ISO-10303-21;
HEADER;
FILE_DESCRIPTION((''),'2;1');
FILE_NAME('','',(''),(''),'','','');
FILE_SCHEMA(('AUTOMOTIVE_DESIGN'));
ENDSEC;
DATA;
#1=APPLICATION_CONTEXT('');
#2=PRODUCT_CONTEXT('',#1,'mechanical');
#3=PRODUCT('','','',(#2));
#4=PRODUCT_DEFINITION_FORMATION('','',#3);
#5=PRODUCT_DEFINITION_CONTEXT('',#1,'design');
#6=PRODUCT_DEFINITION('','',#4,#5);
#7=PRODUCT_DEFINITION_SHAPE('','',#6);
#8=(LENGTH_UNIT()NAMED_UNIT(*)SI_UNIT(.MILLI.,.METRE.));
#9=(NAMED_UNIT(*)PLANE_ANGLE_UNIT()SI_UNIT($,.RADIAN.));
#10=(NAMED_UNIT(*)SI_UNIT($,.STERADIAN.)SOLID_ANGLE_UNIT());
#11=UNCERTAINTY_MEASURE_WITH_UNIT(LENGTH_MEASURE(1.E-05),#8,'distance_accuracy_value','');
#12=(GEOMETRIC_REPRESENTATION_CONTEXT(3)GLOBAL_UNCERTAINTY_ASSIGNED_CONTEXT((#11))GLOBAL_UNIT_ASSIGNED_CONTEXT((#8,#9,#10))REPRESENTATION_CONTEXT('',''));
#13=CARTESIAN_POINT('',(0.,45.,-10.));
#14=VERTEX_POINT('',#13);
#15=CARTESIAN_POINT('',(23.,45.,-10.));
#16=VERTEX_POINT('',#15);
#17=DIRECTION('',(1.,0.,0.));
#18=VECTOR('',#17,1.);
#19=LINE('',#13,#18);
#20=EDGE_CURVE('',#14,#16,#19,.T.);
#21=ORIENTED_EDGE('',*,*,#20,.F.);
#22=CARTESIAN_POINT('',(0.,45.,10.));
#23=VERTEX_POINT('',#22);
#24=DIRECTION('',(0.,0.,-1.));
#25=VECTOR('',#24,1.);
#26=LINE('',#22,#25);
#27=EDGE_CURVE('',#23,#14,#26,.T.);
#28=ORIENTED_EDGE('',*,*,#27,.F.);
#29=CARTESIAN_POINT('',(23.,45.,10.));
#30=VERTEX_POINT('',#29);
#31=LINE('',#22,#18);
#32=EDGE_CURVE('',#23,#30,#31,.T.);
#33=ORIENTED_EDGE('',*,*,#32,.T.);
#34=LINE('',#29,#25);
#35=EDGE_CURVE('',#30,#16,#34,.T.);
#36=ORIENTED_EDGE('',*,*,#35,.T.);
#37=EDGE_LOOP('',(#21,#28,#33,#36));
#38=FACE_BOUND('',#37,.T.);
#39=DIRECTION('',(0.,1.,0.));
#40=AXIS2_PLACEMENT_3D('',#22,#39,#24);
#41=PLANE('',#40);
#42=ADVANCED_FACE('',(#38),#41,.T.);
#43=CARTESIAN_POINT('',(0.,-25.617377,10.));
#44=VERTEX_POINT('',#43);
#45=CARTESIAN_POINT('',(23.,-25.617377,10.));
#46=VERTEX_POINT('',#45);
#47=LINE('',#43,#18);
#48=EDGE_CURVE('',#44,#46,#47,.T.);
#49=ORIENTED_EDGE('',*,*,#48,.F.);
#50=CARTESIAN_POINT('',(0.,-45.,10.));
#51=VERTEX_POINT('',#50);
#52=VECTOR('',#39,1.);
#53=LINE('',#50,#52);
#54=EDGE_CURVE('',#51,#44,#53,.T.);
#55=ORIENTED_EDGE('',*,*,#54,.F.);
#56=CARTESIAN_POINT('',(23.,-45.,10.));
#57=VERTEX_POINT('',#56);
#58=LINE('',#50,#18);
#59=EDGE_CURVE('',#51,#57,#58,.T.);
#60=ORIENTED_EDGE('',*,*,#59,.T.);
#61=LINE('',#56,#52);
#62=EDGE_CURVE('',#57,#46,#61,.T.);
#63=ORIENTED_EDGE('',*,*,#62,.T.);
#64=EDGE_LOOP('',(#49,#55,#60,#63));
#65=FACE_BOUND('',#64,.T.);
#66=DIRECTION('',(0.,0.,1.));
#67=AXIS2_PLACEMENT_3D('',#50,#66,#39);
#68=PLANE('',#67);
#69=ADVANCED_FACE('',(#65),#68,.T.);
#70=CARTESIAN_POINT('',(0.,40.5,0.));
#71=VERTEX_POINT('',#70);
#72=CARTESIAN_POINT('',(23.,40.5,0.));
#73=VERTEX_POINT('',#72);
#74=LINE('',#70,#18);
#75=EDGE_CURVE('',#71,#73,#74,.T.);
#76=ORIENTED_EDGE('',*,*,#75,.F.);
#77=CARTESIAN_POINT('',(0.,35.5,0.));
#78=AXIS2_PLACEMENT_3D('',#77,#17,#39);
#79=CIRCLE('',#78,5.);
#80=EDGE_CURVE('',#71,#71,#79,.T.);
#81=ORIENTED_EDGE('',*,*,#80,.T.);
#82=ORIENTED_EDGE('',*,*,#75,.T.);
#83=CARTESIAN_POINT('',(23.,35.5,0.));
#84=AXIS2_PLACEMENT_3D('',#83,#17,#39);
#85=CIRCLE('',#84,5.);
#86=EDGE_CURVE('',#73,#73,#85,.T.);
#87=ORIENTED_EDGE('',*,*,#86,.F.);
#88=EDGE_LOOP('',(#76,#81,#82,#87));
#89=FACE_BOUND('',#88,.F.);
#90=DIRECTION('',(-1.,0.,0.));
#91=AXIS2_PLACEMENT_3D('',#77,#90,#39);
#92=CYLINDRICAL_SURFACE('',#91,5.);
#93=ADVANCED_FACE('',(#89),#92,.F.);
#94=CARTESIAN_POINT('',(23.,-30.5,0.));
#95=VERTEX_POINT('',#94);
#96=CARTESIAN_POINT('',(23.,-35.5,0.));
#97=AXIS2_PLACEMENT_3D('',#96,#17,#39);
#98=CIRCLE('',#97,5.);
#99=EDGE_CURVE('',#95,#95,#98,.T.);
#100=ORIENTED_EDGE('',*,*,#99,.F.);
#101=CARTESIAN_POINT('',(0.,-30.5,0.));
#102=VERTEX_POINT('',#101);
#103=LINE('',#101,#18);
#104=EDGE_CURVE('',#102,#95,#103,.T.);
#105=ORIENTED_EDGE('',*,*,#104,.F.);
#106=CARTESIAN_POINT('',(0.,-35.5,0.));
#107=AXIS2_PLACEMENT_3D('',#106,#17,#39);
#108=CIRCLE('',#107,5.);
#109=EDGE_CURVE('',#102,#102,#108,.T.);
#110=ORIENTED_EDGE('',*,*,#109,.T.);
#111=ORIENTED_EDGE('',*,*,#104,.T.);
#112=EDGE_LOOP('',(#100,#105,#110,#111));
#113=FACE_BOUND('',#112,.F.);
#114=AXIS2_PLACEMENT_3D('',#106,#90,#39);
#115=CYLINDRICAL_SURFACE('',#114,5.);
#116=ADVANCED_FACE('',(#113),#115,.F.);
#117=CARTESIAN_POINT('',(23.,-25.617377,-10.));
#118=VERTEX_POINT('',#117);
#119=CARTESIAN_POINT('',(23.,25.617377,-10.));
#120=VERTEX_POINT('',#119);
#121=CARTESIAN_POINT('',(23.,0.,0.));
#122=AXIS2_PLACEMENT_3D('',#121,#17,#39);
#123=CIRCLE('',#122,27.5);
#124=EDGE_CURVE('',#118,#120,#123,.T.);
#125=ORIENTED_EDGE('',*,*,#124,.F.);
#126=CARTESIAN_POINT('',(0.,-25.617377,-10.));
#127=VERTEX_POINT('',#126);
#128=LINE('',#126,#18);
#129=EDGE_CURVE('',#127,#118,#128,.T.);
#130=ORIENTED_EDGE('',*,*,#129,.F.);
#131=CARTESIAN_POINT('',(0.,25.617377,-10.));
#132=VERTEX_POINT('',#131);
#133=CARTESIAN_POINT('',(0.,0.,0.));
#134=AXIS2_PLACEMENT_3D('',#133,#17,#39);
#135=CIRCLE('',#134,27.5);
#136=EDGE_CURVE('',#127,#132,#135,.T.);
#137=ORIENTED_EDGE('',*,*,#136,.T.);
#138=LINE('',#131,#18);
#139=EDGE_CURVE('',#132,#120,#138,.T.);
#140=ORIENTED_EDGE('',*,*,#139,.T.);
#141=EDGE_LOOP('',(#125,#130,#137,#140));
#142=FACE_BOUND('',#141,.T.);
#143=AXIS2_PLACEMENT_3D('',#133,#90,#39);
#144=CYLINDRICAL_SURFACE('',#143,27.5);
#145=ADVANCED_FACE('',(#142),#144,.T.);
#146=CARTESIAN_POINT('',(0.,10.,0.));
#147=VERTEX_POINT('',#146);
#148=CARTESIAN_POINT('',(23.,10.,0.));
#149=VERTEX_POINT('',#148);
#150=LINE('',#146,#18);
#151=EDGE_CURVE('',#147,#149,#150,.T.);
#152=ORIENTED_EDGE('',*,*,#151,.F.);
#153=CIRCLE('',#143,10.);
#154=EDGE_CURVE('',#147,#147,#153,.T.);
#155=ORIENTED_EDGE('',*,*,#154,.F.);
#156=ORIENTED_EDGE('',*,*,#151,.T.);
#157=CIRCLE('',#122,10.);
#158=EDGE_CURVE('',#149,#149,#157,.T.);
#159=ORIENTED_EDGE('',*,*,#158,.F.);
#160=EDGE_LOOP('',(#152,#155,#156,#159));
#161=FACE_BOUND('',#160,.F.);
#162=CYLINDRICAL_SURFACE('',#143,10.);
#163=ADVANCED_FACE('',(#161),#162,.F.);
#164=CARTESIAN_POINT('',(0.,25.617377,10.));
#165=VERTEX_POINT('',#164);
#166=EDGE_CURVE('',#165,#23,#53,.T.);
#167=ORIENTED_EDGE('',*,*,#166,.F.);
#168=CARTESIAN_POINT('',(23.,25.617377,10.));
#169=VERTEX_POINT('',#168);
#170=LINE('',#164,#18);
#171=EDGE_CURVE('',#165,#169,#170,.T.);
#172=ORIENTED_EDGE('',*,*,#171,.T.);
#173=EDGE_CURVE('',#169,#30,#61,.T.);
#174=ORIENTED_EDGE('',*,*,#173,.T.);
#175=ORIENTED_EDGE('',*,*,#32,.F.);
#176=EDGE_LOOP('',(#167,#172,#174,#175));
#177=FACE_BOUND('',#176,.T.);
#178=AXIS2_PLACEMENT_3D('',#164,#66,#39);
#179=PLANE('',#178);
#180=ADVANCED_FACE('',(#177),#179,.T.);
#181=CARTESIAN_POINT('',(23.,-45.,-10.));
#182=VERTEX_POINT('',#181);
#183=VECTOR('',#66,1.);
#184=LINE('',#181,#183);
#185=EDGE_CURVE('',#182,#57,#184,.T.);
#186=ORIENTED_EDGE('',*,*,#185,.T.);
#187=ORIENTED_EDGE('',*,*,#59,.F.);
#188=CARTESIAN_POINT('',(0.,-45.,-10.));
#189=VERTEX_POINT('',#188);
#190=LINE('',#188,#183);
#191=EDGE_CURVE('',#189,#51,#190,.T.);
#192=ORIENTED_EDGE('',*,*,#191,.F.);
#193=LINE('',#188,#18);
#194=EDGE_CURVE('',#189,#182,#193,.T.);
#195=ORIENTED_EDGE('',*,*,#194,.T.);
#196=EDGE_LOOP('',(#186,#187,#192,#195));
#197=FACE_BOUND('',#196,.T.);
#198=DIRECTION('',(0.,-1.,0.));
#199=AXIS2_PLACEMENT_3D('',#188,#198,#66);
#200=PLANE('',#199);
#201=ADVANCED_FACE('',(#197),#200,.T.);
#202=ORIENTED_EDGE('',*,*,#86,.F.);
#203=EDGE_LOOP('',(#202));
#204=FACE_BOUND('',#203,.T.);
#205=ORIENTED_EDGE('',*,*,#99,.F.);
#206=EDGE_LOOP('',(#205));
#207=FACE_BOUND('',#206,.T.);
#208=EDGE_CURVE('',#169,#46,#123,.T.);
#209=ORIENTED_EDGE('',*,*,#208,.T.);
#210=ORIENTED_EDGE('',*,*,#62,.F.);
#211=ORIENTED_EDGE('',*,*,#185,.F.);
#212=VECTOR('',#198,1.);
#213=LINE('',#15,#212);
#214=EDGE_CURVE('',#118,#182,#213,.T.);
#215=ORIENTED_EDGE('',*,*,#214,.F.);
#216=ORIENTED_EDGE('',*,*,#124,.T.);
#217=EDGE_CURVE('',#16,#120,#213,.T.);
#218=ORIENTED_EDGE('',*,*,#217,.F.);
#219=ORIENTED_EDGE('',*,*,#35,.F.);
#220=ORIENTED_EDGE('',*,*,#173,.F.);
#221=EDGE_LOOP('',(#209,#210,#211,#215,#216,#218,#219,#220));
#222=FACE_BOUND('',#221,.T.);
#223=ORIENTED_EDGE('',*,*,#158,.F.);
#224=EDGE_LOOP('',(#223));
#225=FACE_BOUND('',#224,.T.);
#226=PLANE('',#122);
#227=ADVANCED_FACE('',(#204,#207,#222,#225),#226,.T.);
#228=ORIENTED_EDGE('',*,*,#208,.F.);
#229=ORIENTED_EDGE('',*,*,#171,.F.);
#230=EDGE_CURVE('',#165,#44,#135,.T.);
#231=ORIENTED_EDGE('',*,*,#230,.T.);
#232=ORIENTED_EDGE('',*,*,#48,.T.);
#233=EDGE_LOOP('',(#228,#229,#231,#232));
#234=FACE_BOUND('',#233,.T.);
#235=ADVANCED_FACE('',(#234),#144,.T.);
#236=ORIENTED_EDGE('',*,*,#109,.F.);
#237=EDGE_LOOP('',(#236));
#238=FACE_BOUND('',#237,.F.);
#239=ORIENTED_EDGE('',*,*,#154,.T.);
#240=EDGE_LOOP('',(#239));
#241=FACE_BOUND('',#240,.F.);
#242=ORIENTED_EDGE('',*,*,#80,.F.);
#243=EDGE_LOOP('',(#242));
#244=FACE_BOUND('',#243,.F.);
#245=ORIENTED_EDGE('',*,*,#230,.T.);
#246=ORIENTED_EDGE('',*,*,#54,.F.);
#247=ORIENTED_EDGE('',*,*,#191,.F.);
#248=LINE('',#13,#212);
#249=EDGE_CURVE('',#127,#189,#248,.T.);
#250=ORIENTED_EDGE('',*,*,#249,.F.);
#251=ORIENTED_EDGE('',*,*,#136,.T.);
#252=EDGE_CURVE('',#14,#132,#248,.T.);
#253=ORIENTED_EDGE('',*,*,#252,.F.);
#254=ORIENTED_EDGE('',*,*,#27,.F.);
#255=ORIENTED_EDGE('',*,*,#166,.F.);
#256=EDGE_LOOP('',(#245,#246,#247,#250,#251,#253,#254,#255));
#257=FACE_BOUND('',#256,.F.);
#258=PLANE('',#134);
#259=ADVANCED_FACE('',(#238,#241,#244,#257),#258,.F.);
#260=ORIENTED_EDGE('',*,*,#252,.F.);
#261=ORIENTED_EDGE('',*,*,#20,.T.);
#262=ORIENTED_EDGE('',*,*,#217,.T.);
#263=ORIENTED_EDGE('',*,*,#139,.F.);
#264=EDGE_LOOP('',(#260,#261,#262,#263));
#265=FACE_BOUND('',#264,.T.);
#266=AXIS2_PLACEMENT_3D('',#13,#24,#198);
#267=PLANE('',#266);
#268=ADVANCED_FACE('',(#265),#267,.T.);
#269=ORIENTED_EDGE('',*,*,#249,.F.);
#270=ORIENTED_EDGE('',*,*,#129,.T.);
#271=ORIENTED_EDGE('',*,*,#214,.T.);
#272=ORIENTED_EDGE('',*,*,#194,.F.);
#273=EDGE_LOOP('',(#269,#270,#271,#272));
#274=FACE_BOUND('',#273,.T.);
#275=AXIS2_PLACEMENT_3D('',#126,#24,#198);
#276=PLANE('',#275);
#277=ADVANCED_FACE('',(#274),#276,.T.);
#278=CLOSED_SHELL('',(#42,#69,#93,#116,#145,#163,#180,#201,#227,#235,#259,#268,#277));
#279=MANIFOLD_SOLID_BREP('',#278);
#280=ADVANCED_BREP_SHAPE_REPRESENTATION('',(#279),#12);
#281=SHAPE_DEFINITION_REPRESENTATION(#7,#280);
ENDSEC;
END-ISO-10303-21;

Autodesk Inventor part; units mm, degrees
ref_plane "YZ Plane" through (0, 0, 0) normal (1, 0, 0) x (0, 1, 0)
ref_plane "XZ Plane" through (0, 0, 0) normal (0, 1, 0) x (-1, 0, 0)
ref_plane "XY Plane" through (0, 0, 0) normal (0, 0, 1) x (1, 0, 0)
sketch "Sketch1" plane through (0, 0, 0) normal (1, 0, 0) x (0, 1, 0)
  circle A0 centre (0, 0) radius 10
  circle A1 centre (0, 0) radius 27.5
  circle A2 centre (35.5, 0) radius 5
  circle A3 centre (-35.5, 0) radius 5
  line L0 (-35.5, 0) -> (35.5, 0) construction
  line L1 (0, 0) -> (10, 0) construction
  line L2 (0, 0) -> (10, 0) construction
  line L3 (-45, 10) -> (45, 10)
  line L4 (45, 10) -> (45, -10)
  line L5 (45, -10) -> (-45, -10)
  line L6 (-45, -10) -> (-45, 10)
  line L7 (-45, 10) -> (45, -10) construction
  line L8 (45, 10) -> (-45, -10) construction
  dimension "d0" = 20
  dimension "d1" = 55
  dimension "d2" = 10
  dimension "d3" = 10
  dimension "d4" = 71
  dimension "d5" = 10
  dimension "d6" = 0
  dimension "d7" = 35.5
  dimension "d8" = 90
  dimension "d9" = 20
extrude "Extrusion1" add sketch "Sketch1" along normal blind 23 contours A0 L3 A1 L5 | A0 L5 A1 L3 | L3 A1 | L5 A1 | A1 L5 L6 L3 | L3 L4 L5 A1
properties part number "KFL004"
